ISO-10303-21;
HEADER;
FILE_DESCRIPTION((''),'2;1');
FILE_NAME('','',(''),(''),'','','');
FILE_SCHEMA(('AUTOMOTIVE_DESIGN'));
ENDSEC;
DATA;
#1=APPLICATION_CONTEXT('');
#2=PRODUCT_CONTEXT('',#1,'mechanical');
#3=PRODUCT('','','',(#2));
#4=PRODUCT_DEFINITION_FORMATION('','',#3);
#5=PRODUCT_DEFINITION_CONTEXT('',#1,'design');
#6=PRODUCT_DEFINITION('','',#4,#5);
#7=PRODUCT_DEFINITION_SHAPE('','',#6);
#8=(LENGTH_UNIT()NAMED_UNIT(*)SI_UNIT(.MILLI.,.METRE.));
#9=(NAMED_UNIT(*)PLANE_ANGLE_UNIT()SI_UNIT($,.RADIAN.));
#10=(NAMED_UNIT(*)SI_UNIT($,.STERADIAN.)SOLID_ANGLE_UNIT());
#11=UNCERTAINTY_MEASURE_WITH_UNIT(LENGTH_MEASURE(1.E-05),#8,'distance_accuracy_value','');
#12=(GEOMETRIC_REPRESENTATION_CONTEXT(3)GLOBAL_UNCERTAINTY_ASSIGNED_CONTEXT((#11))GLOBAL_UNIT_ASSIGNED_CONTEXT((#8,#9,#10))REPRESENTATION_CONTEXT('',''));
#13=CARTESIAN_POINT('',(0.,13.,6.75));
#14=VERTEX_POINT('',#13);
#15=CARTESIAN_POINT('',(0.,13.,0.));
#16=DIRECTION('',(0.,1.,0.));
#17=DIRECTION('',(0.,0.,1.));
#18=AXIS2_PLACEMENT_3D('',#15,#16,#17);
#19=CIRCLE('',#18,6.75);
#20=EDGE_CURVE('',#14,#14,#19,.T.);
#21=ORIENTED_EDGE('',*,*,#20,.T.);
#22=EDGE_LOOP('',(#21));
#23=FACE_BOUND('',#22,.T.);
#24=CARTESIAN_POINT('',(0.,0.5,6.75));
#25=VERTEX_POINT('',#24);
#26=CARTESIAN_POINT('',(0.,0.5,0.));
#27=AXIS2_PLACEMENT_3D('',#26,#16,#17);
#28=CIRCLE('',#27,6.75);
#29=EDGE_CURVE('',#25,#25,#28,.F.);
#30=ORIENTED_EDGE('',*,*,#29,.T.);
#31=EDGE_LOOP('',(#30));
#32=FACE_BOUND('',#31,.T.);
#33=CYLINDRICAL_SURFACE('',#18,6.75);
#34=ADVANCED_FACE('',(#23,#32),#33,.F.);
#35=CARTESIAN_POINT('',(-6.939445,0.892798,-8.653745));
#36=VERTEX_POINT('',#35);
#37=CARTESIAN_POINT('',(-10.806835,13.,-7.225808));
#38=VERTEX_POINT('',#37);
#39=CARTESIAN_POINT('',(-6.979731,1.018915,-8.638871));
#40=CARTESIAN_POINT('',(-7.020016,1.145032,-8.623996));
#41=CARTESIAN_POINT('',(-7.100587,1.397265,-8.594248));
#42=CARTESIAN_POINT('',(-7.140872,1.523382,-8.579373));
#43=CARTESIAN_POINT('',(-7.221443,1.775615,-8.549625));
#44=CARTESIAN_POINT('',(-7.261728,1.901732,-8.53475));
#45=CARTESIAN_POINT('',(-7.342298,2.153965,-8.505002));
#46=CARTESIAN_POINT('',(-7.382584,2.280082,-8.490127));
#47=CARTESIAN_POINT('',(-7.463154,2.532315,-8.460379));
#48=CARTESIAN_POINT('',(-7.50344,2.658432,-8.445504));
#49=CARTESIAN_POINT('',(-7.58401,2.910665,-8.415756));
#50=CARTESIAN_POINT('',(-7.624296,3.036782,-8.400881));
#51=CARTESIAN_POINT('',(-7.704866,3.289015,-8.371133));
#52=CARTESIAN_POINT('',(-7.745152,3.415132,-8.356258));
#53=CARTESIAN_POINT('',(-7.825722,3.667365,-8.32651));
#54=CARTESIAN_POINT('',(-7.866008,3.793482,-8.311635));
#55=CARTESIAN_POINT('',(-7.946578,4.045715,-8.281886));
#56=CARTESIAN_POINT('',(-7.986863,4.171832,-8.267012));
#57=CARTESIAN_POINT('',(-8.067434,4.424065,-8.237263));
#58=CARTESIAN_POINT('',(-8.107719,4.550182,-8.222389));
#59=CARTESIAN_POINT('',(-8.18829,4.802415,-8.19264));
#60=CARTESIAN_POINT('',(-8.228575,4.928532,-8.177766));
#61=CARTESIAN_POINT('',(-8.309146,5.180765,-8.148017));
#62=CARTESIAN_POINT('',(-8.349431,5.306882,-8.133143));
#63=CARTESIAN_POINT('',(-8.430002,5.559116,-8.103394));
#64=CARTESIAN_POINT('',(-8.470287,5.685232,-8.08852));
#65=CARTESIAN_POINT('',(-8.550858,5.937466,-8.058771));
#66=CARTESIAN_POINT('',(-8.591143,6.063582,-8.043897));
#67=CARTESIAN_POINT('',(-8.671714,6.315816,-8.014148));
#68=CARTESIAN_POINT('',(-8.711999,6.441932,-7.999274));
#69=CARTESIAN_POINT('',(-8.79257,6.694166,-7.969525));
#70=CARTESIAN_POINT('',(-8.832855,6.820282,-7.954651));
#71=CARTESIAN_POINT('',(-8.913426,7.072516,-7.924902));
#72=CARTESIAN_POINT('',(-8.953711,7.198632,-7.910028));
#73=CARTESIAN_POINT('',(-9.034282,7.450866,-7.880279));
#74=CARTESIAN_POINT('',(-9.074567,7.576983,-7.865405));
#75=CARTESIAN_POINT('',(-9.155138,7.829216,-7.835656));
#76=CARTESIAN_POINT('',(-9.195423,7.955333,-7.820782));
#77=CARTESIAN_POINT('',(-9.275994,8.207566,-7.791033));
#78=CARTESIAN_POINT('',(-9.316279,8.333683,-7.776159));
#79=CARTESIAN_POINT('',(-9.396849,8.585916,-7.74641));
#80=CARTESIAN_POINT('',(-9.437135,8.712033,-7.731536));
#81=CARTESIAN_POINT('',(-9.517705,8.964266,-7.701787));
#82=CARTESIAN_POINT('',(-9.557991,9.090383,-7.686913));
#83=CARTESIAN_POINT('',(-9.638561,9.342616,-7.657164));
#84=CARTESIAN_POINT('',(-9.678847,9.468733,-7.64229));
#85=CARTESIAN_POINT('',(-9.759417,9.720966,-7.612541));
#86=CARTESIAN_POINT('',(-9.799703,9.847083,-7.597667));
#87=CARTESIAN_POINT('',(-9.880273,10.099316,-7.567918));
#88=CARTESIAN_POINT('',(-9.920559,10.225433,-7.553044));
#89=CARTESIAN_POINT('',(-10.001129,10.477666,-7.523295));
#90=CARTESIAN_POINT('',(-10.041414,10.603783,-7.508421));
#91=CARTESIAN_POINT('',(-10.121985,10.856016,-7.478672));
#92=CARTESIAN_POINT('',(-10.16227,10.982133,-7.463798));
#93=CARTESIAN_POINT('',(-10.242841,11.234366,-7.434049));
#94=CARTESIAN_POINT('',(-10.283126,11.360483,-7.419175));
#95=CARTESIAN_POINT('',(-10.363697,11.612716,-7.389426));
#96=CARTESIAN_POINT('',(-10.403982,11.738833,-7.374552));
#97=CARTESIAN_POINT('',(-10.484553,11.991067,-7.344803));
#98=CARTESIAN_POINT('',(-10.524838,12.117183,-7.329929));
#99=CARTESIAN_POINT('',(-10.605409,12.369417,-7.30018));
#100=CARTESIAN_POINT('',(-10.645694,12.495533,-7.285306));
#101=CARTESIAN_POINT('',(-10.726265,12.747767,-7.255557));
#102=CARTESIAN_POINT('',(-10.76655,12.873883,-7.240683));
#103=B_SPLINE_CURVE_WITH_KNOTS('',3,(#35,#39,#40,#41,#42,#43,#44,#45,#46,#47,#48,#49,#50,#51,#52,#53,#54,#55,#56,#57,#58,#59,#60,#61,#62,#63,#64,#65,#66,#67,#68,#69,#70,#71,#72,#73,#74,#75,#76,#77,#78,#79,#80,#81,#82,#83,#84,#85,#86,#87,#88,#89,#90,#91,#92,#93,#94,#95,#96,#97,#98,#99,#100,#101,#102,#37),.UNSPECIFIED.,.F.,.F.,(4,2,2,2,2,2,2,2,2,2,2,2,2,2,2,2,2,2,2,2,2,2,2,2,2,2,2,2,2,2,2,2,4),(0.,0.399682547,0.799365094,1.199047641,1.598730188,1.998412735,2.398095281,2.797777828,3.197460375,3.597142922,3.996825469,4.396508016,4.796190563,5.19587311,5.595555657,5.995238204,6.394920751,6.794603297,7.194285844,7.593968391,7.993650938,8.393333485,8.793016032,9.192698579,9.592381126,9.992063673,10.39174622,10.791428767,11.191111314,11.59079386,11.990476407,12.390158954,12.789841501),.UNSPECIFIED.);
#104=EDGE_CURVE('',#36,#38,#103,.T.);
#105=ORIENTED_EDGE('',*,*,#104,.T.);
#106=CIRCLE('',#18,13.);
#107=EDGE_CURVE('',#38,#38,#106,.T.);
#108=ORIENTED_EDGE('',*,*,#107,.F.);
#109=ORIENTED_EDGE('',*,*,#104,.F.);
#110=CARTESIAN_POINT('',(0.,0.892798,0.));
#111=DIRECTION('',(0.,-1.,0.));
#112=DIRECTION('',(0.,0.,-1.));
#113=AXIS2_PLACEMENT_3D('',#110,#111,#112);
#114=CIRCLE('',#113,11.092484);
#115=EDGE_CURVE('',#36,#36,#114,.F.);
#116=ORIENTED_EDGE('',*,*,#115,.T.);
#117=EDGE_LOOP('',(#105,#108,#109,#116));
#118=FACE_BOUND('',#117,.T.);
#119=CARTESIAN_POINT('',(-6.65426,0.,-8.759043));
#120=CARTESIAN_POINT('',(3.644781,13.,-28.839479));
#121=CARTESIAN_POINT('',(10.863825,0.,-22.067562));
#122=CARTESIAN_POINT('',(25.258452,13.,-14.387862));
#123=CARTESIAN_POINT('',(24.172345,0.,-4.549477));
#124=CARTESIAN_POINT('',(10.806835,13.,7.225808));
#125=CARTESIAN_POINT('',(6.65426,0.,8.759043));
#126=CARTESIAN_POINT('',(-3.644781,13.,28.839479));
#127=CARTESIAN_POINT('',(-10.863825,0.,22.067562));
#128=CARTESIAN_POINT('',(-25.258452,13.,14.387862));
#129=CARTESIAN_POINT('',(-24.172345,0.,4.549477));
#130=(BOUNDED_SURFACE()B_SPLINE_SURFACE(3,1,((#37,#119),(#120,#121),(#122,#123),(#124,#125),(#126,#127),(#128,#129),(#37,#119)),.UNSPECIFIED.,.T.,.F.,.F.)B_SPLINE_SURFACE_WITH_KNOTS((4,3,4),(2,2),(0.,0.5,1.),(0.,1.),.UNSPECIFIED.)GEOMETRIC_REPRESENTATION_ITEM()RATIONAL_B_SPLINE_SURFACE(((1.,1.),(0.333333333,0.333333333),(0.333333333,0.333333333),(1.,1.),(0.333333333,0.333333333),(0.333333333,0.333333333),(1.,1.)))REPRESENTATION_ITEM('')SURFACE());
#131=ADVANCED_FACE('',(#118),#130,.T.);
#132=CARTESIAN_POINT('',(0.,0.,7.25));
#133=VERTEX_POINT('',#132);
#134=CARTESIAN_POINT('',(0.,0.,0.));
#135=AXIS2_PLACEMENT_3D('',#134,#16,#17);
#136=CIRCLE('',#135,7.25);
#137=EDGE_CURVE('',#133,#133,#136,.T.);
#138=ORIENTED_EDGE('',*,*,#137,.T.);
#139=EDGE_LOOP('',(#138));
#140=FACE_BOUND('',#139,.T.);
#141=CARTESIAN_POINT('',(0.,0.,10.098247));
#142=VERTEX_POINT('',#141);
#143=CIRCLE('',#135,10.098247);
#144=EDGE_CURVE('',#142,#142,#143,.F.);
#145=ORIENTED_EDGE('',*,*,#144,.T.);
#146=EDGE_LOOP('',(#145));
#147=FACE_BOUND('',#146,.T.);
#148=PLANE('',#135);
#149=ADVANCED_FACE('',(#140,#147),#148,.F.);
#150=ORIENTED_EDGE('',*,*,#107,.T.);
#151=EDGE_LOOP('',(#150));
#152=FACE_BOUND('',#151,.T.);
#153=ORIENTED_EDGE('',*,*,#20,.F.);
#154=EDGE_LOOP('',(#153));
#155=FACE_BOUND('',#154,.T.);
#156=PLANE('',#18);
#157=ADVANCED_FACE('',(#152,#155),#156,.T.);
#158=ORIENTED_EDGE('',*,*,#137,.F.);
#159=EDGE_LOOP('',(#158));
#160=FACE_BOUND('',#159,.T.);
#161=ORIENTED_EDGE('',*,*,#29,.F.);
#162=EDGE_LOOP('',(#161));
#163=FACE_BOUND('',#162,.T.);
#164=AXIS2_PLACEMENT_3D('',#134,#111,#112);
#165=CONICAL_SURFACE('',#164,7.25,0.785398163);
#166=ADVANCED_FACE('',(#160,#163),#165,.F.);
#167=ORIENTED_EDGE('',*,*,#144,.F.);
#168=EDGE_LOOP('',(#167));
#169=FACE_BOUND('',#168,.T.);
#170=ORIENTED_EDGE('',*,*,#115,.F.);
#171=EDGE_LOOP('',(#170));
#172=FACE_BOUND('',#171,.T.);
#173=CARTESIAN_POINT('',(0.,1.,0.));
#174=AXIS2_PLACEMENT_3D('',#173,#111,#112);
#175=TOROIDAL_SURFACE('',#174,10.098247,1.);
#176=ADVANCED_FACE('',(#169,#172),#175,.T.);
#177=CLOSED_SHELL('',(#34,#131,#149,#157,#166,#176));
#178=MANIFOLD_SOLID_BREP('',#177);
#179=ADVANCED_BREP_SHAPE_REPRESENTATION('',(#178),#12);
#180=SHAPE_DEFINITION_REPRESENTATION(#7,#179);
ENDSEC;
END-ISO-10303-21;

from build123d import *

# Parameters (mm, degrees)
CONG_1_R          = 1
D_GAGEMENT_M121_D = 13.5
CHANFREIN1_SIZE   = 0.5


with BuildPart() as part:
    # Lissage1: read off the stored shape, not the designer's step
    # Lissage1: loft between two sections, ruled curve by curve
    lissage1_from = [
        Edge.make_bspline([(-10.806835439, 13, -7.225808453), (3.644781468, 13, -28.83947933), (25.258452345, 13, -14.387862424), (10.806835439, 13, 7.225808453), (-3.644781468, 13, 28.83947933), (-25.258452345, 13, 14.387862424), (-10.806835439, 13, -7.225808453)], [0, 0, 0, 0, 0.5, 0.5, 0.5, 1, 1, 1, 1], 3, [1, 0.333333333, 0.333333333, 1, 0.333333333, 0.333333333, 1]),
    ]
    lissage1_to = [
        Edge.make_bspline([(-6.654259826, 0, -8.759042537), (10.863825248, 0, -22.06756219), (24.1723449, 0, -4.549477116), (6.654259826, 0, 8.759042537), (-10.863825248, 0, 22.06756219), (-24.1723449, 0, 4.549477116), (-6.654259826, 0, -8.759042537)], [0, 0, 0, 0, 0.5, 0.5, 0.5, 1, 1, 1, 1], 3, [1, 0.333333333, 0.333333333, 1, 0.333333333, 0.333333333, 1]),
    ]
    lissage1 = Solid(Shell([*[Face.make_surface_from_curves(lissage1_from[k], lissage1_to[k]) for k in range(1)], Face(Wire(lissage1_from)), Face(Wire(lissage1_to))]))
    add(lissage1)

    # Congé1
    cong_1_edges = [part.edges().sort_by_distance(p)[0] for p in [
        (6.654259826, 0, 8.759042537),
    ]]
    fillet(cong_1_edges, radius=CONG_1_R)

    # Dégagement M121 (through all)
    with Locations(Plane(origin=(0, 13, 0), x_dir=(1, 0, 0), z_dir=(0, 1, 0))):
        with Locations((0, 0)):
            Hole(D_GAGEMENT_M121_D / 2)

    # Chanfrein1
    chanfrein1_edges = [part.edges().sort_by_distance(p)[0] for p in [
        (6.75, 0, 0),
    ]]
    chamfer(chanfrein1_edges, length=CHANFREIN1_SIZE)


solid = part.part
